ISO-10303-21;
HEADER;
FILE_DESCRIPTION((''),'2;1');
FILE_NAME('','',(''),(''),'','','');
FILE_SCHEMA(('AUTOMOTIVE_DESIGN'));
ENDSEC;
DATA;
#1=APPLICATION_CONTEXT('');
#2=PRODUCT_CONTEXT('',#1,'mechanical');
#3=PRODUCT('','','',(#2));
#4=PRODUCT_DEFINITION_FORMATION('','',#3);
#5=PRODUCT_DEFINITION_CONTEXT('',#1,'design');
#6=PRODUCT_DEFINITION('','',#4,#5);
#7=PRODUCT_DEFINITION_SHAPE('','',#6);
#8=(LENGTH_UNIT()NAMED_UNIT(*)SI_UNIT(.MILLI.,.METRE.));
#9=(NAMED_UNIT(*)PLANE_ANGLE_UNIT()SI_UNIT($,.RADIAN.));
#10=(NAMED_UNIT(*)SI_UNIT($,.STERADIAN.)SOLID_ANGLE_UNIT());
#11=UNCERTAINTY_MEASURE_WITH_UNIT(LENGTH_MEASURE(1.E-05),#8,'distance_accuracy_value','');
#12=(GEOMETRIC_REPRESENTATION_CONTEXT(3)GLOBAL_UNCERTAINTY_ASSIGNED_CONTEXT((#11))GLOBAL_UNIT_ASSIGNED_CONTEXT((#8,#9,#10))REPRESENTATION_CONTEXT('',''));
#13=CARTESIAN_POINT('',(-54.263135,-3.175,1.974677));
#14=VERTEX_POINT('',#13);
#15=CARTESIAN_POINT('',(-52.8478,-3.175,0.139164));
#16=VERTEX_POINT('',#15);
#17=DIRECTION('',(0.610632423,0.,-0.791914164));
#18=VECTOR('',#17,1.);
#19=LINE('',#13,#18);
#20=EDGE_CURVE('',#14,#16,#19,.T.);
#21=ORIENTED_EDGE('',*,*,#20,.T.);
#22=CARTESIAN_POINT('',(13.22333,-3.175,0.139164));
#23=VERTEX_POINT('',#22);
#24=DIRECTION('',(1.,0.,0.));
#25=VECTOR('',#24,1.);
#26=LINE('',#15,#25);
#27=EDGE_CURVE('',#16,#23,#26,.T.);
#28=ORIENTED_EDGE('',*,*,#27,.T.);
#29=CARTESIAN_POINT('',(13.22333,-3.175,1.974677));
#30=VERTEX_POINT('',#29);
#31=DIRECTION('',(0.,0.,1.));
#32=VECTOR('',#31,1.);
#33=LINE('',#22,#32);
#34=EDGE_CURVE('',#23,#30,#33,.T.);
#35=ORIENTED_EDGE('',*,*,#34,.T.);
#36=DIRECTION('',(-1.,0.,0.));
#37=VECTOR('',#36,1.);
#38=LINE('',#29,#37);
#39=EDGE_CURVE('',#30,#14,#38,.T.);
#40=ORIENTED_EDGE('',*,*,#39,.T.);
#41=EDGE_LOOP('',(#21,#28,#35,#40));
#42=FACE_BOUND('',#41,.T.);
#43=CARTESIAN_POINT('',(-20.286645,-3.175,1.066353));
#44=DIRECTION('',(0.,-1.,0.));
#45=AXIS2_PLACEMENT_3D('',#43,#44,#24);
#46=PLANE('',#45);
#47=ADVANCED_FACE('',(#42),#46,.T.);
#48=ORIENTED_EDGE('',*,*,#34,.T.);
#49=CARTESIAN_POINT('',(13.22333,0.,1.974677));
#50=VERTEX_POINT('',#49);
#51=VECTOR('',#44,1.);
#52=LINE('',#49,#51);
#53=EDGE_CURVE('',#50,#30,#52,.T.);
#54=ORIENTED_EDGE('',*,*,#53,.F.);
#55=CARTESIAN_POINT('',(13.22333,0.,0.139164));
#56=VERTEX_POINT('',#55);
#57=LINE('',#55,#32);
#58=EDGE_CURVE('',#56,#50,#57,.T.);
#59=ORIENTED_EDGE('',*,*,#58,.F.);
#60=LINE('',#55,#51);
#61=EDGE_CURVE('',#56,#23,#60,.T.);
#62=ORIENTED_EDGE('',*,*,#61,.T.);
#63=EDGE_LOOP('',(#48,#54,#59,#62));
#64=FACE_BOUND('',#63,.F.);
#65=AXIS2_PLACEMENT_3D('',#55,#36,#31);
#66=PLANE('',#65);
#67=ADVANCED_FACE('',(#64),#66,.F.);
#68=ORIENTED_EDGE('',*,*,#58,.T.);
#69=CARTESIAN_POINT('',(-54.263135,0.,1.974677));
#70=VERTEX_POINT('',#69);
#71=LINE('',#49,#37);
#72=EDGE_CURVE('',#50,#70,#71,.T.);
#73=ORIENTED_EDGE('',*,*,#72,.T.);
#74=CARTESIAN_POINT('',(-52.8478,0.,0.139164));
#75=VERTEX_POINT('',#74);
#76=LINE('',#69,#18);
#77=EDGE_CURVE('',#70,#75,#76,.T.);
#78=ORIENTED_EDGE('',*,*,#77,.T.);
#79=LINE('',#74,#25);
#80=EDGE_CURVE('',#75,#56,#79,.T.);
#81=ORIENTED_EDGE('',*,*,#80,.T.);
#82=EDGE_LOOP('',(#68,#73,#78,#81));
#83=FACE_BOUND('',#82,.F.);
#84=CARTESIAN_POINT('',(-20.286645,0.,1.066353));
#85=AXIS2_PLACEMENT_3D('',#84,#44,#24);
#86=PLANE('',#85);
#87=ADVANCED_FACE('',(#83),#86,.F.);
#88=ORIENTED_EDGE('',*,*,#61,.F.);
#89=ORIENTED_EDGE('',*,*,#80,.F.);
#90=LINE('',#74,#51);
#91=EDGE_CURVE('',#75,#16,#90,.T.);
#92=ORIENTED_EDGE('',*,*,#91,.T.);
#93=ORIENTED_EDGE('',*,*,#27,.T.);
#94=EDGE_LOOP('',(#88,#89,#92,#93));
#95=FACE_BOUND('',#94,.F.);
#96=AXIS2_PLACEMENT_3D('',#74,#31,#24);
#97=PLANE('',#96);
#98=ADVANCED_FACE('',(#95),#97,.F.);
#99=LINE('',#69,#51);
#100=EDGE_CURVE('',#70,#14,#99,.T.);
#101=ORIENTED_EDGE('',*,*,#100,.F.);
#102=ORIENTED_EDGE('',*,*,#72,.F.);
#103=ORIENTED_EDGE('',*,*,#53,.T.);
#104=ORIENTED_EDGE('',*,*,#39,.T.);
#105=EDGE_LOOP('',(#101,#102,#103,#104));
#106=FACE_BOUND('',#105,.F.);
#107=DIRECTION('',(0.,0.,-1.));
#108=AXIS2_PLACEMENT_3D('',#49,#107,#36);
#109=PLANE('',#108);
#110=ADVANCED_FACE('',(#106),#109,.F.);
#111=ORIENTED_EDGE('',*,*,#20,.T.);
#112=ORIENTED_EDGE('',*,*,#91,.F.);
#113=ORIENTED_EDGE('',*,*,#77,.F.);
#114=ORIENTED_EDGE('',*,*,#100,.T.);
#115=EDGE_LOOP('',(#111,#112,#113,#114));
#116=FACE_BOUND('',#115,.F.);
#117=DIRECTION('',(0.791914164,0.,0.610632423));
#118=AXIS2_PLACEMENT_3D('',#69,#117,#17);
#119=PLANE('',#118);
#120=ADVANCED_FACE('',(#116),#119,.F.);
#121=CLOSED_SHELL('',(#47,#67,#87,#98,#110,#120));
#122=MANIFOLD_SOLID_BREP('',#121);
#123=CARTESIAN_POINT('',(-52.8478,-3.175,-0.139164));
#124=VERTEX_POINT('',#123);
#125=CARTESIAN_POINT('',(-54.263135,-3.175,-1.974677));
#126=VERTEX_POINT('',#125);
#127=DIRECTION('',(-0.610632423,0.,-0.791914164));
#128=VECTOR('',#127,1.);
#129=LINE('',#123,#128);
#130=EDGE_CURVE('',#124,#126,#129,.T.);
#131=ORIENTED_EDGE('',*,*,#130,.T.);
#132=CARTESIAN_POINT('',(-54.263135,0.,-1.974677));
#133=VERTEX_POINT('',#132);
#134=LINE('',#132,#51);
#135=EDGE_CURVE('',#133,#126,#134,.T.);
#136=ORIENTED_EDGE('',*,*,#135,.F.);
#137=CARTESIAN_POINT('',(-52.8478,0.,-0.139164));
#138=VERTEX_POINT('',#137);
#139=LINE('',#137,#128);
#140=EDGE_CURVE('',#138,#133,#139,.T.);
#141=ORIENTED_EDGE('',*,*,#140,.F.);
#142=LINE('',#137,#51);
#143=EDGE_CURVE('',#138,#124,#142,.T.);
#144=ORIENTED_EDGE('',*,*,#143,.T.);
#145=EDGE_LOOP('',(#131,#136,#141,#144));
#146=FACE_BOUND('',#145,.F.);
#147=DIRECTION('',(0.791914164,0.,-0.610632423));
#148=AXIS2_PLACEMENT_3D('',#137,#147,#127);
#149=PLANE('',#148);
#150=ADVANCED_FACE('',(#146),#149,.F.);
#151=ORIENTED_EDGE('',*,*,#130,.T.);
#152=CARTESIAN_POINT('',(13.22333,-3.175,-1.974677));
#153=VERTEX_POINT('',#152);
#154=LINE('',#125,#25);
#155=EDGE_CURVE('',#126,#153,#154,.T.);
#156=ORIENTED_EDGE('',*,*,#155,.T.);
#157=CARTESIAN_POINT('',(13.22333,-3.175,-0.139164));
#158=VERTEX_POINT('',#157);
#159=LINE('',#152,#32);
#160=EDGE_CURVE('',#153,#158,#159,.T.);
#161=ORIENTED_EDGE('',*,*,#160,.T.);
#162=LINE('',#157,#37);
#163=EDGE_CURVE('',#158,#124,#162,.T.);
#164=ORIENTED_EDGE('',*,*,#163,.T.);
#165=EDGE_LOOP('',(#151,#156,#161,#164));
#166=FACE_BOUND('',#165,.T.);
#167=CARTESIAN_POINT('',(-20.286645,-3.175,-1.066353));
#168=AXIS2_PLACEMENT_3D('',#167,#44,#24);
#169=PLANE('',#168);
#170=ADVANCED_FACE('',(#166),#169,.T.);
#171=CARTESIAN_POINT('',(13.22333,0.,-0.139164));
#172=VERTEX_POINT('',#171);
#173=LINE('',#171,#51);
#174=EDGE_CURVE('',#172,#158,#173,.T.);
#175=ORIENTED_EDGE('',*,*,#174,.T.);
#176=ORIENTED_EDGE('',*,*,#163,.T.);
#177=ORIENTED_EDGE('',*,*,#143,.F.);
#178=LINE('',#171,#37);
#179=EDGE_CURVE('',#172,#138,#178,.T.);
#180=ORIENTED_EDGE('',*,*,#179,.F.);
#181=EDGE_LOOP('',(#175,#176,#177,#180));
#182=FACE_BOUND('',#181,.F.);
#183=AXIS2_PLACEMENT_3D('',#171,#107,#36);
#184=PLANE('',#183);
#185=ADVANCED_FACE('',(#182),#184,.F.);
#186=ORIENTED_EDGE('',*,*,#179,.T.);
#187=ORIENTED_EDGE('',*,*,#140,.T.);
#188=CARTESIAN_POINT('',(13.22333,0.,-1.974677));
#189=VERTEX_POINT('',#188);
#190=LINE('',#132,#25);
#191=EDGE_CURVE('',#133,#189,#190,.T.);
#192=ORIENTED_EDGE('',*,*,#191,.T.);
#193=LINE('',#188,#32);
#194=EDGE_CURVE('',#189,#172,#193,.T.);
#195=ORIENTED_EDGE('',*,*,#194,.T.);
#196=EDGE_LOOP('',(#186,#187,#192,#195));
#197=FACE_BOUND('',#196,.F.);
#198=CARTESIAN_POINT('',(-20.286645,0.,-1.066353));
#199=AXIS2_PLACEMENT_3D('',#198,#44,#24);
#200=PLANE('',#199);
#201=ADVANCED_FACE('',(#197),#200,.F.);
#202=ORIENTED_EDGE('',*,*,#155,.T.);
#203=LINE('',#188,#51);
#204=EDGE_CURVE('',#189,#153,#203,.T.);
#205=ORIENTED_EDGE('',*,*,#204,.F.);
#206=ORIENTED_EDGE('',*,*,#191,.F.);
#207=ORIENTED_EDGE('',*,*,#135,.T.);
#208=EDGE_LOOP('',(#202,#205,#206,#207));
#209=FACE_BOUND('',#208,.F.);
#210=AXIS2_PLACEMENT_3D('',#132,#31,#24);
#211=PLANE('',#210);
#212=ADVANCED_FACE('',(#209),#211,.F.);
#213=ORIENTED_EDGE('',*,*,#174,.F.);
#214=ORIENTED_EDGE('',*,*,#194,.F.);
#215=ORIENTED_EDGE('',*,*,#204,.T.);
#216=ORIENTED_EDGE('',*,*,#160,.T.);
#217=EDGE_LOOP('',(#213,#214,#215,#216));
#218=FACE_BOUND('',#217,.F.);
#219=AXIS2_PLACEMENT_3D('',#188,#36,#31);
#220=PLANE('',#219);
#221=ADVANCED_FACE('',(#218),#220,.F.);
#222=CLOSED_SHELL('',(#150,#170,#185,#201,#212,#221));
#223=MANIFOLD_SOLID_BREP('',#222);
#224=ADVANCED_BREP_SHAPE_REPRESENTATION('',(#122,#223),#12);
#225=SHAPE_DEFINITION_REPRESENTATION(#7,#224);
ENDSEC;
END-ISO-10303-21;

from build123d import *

# Parameters (mm, degrees)
F1_DEPTH = 3.175


# Not quite as in the source:
# - a feature names something its author has since deleted; it is built from what else it names


with BuildPart() as f1:
    # F0 (on Front) → F1 (new body)
    with BuildSketch(Plane.XZ):
        Polygon((-6.1159002899, -0.1391640983), (-13.6670420062, -0.1391640983), (-41.0246514305, -0.1391640983), (-52.8478002203, -0.1391640983), (-54.263135106, -1.9746770844), (13.2233296217, -1.9746770844), (13.2233296217, -0.1391640983), align=None)
    extrude(amount=F1_DEPTH)


with BuildPart() as f1b:
    # F0 (on Front) → F1, piece 2 (new body)
    with BuildSketch(Plane.XZ):
        Polygon((13.2233296217, 1.9746770844), (-54.263135106, 1.9746770844), (-52.8478002203, 0.1391640983), (-41.0246514305, 0.1391640983), (-13.6670420062, 0.1391640983), (-6.1159002899, 0.1391640983), (13.2233296217, 0.1391640983), align=None)
    extrude(amount=F1_DEPTH)


solid = Compound([f1.part, f1b.part])
